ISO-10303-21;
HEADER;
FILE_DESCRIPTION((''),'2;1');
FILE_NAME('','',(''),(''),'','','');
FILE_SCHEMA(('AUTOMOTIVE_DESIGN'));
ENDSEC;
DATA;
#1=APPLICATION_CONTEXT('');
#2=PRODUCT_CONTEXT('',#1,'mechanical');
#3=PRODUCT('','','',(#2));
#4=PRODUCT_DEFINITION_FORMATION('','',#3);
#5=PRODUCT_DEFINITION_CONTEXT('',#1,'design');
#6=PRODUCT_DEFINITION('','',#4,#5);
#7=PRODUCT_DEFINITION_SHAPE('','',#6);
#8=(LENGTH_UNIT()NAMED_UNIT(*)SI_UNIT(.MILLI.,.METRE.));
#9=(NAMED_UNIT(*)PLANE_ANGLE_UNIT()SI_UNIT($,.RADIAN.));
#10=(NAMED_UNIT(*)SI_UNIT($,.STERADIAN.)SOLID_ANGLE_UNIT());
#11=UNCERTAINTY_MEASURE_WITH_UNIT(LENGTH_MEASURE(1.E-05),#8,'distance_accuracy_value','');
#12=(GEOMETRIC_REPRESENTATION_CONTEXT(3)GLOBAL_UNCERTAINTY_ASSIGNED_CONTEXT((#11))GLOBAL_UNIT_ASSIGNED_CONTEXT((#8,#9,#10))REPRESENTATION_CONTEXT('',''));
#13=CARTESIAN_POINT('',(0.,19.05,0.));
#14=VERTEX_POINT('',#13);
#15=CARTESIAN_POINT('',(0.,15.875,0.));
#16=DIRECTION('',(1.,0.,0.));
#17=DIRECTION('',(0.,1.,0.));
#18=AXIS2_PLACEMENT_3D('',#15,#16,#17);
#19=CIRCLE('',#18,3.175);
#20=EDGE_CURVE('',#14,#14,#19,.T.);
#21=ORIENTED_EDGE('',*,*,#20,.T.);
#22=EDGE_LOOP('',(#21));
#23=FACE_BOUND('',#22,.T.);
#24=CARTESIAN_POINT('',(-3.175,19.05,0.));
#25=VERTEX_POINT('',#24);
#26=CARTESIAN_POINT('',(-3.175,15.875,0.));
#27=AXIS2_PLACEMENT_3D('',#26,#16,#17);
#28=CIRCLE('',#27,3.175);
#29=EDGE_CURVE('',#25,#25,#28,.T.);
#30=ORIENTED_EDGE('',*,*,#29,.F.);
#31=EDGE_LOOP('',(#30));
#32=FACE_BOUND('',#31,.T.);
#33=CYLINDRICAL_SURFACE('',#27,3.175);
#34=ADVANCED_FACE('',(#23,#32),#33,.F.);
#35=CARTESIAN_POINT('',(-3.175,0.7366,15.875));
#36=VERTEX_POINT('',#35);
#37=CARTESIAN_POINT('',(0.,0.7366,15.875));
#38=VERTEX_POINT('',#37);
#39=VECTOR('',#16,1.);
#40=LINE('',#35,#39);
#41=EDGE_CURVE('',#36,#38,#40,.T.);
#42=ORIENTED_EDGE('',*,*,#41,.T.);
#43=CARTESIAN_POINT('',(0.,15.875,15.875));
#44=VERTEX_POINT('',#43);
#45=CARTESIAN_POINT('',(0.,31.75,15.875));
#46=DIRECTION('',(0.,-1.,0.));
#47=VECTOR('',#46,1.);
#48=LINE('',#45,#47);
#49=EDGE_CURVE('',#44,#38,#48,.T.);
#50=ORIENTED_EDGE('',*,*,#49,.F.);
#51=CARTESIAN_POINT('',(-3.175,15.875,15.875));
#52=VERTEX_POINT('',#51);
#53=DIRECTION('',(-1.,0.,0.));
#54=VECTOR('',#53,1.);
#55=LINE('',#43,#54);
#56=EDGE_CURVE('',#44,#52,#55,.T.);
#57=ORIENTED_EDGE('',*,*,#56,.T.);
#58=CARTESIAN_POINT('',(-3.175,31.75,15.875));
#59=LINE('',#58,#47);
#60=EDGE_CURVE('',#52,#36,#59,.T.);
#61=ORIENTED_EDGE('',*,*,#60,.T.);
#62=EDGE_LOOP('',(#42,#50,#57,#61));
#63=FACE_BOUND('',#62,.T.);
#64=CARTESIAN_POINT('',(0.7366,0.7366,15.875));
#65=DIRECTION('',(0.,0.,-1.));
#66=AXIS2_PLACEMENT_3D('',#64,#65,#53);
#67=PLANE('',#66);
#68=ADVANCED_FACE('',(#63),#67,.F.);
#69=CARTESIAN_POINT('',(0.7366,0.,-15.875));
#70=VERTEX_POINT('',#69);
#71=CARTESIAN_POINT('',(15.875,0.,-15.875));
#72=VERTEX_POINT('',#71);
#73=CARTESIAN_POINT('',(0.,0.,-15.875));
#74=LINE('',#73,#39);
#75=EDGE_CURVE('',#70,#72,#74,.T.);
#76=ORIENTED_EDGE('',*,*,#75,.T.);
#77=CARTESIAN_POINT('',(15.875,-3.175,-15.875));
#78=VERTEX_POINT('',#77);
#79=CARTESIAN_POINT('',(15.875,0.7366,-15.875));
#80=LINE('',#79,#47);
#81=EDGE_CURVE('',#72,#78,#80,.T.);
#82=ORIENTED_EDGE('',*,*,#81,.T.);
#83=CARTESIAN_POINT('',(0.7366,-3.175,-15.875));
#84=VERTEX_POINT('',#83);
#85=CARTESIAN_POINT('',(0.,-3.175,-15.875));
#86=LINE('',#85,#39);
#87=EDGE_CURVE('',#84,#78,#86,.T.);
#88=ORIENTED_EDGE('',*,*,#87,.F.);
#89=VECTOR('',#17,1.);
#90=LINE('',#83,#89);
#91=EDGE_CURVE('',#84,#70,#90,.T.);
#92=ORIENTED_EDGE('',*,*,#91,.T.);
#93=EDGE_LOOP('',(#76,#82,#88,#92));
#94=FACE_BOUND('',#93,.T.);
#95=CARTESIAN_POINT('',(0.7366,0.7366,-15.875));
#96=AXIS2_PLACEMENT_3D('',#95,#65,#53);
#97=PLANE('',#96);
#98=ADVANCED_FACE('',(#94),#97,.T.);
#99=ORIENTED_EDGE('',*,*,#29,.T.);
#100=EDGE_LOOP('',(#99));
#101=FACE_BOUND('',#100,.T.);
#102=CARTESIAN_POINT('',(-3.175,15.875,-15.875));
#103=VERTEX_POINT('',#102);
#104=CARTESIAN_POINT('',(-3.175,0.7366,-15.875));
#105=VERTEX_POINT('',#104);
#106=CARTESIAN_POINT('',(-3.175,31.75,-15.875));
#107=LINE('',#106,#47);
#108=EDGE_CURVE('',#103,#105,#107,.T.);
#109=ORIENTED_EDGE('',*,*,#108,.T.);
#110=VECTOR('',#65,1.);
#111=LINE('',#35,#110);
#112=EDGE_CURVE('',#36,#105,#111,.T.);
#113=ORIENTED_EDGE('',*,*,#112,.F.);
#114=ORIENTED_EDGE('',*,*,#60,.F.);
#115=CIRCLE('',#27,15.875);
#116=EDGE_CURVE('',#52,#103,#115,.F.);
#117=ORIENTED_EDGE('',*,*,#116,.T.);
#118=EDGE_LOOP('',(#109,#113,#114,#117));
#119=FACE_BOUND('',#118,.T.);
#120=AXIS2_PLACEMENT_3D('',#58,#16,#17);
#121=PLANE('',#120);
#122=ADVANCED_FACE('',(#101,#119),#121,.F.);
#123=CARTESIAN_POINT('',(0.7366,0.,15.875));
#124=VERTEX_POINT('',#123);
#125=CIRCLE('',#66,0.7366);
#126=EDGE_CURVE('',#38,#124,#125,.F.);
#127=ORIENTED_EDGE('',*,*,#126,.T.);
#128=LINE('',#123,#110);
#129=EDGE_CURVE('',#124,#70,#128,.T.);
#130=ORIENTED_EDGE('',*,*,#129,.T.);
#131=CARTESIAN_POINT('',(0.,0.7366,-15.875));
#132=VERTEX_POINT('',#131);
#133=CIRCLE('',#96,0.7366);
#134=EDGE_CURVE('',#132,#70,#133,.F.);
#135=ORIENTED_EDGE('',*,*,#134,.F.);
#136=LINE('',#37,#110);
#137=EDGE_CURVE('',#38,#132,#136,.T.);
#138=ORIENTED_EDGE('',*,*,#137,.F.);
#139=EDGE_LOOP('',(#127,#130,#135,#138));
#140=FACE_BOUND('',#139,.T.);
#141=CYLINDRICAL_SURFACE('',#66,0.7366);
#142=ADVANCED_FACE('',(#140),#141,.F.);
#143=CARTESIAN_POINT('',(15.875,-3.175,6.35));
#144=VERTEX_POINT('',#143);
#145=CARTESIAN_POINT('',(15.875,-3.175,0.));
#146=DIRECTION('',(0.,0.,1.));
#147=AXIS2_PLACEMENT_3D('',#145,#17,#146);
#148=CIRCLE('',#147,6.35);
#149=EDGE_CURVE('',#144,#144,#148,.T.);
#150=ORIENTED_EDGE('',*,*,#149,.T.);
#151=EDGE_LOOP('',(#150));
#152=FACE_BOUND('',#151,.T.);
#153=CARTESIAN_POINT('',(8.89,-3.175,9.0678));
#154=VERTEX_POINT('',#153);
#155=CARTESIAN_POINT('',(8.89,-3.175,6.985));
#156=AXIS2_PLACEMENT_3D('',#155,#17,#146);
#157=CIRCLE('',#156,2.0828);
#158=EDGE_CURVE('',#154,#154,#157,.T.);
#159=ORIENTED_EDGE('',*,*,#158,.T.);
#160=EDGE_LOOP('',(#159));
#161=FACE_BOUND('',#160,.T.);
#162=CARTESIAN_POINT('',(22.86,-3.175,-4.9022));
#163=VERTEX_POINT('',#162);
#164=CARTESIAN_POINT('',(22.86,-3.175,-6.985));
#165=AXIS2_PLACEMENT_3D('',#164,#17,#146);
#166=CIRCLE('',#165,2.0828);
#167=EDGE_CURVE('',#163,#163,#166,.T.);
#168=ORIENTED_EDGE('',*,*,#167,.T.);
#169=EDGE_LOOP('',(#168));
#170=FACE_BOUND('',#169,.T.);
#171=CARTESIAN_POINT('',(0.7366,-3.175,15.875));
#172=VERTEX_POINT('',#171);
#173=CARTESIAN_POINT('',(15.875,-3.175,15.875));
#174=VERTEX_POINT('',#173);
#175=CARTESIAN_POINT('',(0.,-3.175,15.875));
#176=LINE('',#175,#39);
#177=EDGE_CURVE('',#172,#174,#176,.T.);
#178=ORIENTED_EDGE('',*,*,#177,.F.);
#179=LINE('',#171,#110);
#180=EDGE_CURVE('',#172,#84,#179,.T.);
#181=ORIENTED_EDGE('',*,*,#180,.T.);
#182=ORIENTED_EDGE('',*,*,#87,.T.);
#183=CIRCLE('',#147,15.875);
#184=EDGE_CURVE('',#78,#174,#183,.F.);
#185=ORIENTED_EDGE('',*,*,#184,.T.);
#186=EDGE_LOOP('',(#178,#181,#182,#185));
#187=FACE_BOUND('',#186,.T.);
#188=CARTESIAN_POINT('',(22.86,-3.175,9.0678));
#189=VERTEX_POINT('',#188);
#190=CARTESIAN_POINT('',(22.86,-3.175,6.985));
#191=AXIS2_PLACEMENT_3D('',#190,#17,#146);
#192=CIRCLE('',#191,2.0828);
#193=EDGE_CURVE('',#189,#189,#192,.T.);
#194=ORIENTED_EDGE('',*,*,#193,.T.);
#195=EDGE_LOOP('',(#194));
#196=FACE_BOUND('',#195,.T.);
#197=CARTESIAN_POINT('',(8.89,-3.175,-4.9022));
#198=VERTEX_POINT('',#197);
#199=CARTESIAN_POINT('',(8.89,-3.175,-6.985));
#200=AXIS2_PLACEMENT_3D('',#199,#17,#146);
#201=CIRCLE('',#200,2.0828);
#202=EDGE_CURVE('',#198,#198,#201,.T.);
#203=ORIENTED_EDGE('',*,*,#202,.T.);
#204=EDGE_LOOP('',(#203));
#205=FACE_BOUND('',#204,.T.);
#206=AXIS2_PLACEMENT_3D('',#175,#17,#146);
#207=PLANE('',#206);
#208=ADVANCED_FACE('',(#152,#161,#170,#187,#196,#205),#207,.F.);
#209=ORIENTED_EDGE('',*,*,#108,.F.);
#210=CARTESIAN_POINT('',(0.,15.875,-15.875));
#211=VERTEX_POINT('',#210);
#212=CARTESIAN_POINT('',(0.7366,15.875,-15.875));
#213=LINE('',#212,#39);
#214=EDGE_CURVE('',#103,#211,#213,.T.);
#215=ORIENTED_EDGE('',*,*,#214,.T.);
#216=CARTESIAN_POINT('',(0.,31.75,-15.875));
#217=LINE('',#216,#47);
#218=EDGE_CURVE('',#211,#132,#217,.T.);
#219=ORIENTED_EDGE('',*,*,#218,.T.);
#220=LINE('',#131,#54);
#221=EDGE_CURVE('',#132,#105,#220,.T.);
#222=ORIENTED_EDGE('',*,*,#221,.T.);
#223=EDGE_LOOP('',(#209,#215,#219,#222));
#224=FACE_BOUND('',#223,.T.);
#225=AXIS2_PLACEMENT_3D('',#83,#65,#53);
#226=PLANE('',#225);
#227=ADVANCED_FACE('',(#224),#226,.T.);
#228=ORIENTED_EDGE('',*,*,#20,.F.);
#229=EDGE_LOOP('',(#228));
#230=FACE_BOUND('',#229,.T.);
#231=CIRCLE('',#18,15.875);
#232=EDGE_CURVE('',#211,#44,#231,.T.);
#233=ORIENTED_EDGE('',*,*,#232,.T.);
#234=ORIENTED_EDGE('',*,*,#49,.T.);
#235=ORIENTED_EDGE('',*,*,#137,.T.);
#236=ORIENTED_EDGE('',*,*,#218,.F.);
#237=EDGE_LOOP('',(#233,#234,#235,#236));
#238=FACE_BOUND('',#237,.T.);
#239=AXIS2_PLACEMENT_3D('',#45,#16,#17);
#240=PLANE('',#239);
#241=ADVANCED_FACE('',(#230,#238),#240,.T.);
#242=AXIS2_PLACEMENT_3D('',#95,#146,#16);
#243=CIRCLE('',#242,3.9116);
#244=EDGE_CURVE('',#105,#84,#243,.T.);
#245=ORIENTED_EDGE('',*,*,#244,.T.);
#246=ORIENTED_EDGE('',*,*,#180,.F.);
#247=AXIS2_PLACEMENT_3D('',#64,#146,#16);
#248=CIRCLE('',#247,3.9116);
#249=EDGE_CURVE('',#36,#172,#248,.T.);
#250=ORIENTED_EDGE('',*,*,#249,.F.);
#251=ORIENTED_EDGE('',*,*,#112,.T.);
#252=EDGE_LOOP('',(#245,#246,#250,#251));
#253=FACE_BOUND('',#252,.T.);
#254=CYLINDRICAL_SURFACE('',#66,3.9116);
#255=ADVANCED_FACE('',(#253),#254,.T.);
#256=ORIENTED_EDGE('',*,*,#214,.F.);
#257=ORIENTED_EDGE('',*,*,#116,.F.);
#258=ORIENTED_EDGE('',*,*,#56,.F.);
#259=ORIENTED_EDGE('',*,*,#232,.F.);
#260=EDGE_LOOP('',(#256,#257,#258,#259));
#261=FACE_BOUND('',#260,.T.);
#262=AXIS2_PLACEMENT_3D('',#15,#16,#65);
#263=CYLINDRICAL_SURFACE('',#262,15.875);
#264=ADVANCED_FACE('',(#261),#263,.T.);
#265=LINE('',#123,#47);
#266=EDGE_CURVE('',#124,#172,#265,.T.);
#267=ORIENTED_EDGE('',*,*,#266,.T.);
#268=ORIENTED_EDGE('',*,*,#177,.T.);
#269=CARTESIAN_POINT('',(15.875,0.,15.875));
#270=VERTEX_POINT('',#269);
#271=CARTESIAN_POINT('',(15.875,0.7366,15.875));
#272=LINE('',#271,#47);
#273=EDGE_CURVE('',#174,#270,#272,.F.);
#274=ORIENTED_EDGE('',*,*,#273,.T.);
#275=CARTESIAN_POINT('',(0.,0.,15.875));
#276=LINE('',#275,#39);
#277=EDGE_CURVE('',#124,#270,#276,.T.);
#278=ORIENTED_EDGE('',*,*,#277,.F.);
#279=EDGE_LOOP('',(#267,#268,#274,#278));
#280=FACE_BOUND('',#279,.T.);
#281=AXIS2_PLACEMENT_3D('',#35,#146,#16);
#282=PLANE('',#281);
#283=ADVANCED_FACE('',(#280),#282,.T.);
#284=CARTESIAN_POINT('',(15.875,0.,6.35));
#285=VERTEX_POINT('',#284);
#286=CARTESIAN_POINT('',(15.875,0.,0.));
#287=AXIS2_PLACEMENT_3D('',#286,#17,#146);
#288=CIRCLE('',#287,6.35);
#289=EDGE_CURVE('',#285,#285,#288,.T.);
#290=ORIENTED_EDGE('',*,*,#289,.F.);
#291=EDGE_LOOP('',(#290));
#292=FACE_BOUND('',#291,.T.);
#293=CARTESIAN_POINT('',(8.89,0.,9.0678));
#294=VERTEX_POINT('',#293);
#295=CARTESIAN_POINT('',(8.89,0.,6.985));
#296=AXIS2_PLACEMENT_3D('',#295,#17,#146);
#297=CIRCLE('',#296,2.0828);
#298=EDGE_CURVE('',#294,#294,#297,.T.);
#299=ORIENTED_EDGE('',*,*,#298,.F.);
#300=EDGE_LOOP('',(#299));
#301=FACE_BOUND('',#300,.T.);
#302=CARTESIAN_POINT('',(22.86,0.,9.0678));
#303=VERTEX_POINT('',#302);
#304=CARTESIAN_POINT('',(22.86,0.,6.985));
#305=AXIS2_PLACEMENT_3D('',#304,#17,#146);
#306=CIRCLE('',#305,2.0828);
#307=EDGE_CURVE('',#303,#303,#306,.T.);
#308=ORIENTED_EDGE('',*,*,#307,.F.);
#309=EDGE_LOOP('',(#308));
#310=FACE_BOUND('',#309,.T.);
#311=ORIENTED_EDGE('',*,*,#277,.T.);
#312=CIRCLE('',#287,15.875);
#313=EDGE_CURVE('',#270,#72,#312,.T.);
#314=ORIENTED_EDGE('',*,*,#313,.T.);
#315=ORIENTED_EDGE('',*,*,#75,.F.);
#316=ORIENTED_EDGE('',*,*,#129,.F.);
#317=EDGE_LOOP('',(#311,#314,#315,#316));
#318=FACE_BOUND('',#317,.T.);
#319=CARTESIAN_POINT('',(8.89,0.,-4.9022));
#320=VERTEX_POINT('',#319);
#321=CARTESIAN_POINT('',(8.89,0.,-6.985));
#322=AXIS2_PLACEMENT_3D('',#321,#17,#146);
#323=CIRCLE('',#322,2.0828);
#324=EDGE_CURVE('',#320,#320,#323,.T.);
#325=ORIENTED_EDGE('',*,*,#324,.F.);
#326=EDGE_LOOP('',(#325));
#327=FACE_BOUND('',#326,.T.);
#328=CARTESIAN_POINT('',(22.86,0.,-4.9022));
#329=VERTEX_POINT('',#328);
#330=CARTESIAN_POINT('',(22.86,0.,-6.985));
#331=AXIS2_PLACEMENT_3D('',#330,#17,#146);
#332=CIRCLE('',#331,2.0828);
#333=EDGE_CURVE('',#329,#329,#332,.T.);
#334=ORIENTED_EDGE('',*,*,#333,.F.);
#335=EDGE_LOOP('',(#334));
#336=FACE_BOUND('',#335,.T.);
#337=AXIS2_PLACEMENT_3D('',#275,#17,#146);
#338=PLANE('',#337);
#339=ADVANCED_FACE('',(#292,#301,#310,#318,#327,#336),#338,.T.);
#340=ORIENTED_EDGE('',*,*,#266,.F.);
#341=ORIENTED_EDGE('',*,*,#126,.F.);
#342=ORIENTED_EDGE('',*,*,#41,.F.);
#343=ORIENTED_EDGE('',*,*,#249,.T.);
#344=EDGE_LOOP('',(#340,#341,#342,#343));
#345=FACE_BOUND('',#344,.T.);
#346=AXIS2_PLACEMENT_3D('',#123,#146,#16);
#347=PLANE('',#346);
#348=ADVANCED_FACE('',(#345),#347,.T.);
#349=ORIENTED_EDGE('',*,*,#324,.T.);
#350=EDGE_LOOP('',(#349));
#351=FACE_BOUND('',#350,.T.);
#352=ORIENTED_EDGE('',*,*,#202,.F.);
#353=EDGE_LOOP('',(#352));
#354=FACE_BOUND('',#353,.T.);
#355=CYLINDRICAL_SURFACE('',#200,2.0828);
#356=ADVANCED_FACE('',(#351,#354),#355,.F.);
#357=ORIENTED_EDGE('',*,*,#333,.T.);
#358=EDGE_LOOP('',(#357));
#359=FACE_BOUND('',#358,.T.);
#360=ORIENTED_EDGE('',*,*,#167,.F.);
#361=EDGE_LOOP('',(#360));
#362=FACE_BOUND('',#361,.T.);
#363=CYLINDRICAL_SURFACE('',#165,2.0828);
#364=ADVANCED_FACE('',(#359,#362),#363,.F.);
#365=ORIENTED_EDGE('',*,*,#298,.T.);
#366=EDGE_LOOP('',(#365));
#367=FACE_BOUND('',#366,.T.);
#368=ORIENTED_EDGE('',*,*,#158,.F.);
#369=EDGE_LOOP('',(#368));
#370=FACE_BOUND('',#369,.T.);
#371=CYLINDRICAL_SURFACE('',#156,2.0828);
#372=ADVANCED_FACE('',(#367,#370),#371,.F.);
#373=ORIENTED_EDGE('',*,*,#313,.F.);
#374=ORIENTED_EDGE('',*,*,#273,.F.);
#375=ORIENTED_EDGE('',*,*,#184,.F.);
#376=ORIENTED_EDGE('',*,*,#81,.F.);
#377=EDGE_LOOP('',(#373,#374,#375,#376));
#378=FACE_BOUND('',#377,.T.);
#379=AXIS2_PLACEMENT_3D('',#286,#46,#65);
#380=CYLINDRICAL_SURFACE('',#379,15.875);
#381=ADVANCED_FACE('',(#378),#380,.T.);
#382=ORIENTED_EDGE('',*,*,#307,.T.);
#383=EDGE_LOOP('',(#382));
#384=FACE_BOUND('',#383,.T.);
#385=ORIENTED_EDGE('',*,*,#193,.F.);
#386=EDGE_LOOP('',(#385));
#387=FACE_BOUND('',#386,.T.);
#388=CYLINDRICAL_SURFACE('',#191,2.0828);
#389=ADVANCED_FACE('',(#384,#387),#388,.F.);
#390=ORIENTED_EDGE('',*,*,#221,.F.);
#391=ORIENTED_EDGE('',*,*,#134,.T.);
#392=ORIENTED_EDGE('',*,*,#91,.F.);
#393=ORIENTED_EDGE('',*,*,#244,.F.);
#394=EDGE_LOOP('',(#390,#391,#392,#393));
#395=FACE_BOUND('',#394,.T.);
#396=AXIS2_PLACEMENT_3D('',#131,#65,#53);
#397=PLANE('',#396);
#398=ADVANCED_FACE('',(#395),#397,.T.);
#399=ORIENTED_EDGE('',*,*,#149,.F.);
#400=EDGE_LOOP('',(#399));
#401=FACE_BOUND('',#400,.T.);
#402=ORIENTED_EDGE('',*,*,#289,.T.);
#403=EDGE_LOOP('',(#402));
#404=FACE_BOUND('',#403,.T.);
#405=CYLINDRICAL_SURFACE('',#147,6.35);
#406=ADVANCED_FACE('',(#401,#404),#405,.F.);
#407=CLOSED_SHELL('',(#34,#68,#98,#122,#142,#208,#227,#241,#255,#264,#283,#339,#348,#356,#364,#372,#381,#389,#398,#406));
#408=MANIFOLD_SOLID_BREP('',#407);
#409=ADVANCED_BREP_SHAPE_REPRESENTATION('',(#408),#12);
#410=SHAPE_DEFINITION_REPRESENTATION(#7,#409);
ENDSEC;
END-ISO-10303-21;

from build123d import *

# Parameters (mm, degrees)
BASE_FLANGE1_DEPTH = 15.875
FILLET1_RADIUS     = 15.875
FILLET1_LENGTH     = 3.175
FILLET2_RADIUS     = 15.875
FILLET2_LENGTH     = 3.175
SKETCH6_R          = 3.175
CUT_EXTRUDE1_DEPTH = 48.625
SKETCH7_R          = 6.35
CUT_EXTRUDE2_DEPTH = 48.625
SKETCH8_R          = 2.0828
CUT_EXTRUDE3_DEPTH = 48.625


# Sheet-metal steps are written as plain solids
with BuildPart() as part:
    # Sketch1 → Base-Flange1 (new, symmetric)
    with BuildSketch(Plane.XY):
        with BuildLine():
            Line((0, 31.75), (0, 0.7366))
            ThreePointArc((0, 0.7366), (0.215745145, 0.215745145), (0.7366, 0))
            Line((0.7366, 0), (31.75, 0))
            Line((31.75, 0), (31.75, -3.175))
            Line((31.75, -3.175), (0.7366, -3.175))
            ThreePointArc((0.7366, -3.175), (-2.029318885, -2.029318885), (-3.175, 0.7366))
            Line((-3.175, 0.7366), (-3.175, 31.75))
            Line((-3.175, 31.75), (0, 31.75))
        make_face()
    extrude(amount=BASE_FLANGE1_DEPTH, both=True)

    # Fillet1: full round fillet: the end face becomes a half cylinder, R = half its width
    fillet1_face = Plane((-1.5875, 31.75, 0), x_dir=(1, 0, 0), z_dir=(0, 1, 0))  # on the end face: x along it, z out of the body
    fillet1_slab = fillet1_face.offset(-FILLET1_RADIUS / 2) * Box(FILLET1_LENGTH, 2 * FILLET1_RADIUS, FILLET1_RADIUS, mode=Mode.PRIVATE)  # the body's end, R deep
    fillet1_round = Plane((-1.5875, 15.875, 0), x_dir=(0, 1, 0), z_dir=(1, 0, 0)) * Cylinder(FILLET1_RADIUS, FILLET1_LENGTH, mode=Mode.PRIVATE)  # its axis R under the face
    add(fillet1_slab - fillet1_round, mode=Mode.SUBTRACT)

    # Fillet2: full round fillet: the end face becomes a half cylinder, R = half its width
    fillet2_face = Plane((31.75, -1.5875, 0), x_dir=(0, -1, 0), z_dir=(1, 0, 0))  # on the end face: x along it, z out of the body
    fillet2_slab = fillet2_face.offset(-FILLET2_RADIUS / 2) * Box(FILLET2_LENGTH, 2 * FILLET2_RADIUS, FILLET2_RADIUS, mode=Mode.PRIVATE)  # the body's end, R deep
    fillet2_round = Plane((15.875, -1.5875, 0), x_dir=(1, 0, 0), z_dir=(0, -1, 0)) * Cylinder(FILLET2_RADIUS, FILLET2_LENGTH, mode=Mode.PRIVATE)  # its axis R under the face
    add(fillet2_slab - fillet2_round, mode=Mode.SUBTRACT)

    # Sketch6 → Cut-Extrude1 (cut, through all)
    with BuildSketch(Plane(origin=(0, 0, 0), x_dir=(0, 0, -1), z_dir=(1, 0, 0))):
        with Locations(Location((0, 15.875, 0), (0, 0, 90))):
            Circle(SKETCH6_R)
    extrude(amount=-CUT_EXTRUDE1_DEPTH, mode=Mode.SUBTRACT)

    # Sketch7 → Cut-Extrude2 (cut, through all)
    with BuildSketch(Plane(origin=(0, 0, 0), x_dir=(1, 0, 0), z_dir=(0, 1, 0))):
        with Locations(Location((15.875, 0, 0), (0, 0, 270))):
            Circle(SKETCH7_R)
    extrude(amount=-CUT_EXTRUDE2_DEPTH, mode=Mode.SUBTRACT)

    # Sketch8 → Cut-Extrude3 (cut, through all)
    with BuildSketch(Plane(origin=(0, 0, 0), x_dir=(1, 0, 0), z_dir=(0, 1, 0))):
        with Locations(Location((22.86, -6.985, 0), (0, 0, 270))):
            Circle(SKETCH8_R)
        with Locations(Location((22.86, 6.985, 0), (0, 0, 270))):
            Circle(SKETCH8_R)
        with Locations(Location((8.89, 6.985, 0), (0, 0, 270))):
            Circle(SKETCH8_R)
        with Locations(Location((8.89, -6.985, 0), (0, 0, 270))):
            Circle(SKETCH8_R)
    extrude(amount=-CUT_EXTRUDE3_DEPTH, mode=Mode.SUBTRACT)


solid = part.part
